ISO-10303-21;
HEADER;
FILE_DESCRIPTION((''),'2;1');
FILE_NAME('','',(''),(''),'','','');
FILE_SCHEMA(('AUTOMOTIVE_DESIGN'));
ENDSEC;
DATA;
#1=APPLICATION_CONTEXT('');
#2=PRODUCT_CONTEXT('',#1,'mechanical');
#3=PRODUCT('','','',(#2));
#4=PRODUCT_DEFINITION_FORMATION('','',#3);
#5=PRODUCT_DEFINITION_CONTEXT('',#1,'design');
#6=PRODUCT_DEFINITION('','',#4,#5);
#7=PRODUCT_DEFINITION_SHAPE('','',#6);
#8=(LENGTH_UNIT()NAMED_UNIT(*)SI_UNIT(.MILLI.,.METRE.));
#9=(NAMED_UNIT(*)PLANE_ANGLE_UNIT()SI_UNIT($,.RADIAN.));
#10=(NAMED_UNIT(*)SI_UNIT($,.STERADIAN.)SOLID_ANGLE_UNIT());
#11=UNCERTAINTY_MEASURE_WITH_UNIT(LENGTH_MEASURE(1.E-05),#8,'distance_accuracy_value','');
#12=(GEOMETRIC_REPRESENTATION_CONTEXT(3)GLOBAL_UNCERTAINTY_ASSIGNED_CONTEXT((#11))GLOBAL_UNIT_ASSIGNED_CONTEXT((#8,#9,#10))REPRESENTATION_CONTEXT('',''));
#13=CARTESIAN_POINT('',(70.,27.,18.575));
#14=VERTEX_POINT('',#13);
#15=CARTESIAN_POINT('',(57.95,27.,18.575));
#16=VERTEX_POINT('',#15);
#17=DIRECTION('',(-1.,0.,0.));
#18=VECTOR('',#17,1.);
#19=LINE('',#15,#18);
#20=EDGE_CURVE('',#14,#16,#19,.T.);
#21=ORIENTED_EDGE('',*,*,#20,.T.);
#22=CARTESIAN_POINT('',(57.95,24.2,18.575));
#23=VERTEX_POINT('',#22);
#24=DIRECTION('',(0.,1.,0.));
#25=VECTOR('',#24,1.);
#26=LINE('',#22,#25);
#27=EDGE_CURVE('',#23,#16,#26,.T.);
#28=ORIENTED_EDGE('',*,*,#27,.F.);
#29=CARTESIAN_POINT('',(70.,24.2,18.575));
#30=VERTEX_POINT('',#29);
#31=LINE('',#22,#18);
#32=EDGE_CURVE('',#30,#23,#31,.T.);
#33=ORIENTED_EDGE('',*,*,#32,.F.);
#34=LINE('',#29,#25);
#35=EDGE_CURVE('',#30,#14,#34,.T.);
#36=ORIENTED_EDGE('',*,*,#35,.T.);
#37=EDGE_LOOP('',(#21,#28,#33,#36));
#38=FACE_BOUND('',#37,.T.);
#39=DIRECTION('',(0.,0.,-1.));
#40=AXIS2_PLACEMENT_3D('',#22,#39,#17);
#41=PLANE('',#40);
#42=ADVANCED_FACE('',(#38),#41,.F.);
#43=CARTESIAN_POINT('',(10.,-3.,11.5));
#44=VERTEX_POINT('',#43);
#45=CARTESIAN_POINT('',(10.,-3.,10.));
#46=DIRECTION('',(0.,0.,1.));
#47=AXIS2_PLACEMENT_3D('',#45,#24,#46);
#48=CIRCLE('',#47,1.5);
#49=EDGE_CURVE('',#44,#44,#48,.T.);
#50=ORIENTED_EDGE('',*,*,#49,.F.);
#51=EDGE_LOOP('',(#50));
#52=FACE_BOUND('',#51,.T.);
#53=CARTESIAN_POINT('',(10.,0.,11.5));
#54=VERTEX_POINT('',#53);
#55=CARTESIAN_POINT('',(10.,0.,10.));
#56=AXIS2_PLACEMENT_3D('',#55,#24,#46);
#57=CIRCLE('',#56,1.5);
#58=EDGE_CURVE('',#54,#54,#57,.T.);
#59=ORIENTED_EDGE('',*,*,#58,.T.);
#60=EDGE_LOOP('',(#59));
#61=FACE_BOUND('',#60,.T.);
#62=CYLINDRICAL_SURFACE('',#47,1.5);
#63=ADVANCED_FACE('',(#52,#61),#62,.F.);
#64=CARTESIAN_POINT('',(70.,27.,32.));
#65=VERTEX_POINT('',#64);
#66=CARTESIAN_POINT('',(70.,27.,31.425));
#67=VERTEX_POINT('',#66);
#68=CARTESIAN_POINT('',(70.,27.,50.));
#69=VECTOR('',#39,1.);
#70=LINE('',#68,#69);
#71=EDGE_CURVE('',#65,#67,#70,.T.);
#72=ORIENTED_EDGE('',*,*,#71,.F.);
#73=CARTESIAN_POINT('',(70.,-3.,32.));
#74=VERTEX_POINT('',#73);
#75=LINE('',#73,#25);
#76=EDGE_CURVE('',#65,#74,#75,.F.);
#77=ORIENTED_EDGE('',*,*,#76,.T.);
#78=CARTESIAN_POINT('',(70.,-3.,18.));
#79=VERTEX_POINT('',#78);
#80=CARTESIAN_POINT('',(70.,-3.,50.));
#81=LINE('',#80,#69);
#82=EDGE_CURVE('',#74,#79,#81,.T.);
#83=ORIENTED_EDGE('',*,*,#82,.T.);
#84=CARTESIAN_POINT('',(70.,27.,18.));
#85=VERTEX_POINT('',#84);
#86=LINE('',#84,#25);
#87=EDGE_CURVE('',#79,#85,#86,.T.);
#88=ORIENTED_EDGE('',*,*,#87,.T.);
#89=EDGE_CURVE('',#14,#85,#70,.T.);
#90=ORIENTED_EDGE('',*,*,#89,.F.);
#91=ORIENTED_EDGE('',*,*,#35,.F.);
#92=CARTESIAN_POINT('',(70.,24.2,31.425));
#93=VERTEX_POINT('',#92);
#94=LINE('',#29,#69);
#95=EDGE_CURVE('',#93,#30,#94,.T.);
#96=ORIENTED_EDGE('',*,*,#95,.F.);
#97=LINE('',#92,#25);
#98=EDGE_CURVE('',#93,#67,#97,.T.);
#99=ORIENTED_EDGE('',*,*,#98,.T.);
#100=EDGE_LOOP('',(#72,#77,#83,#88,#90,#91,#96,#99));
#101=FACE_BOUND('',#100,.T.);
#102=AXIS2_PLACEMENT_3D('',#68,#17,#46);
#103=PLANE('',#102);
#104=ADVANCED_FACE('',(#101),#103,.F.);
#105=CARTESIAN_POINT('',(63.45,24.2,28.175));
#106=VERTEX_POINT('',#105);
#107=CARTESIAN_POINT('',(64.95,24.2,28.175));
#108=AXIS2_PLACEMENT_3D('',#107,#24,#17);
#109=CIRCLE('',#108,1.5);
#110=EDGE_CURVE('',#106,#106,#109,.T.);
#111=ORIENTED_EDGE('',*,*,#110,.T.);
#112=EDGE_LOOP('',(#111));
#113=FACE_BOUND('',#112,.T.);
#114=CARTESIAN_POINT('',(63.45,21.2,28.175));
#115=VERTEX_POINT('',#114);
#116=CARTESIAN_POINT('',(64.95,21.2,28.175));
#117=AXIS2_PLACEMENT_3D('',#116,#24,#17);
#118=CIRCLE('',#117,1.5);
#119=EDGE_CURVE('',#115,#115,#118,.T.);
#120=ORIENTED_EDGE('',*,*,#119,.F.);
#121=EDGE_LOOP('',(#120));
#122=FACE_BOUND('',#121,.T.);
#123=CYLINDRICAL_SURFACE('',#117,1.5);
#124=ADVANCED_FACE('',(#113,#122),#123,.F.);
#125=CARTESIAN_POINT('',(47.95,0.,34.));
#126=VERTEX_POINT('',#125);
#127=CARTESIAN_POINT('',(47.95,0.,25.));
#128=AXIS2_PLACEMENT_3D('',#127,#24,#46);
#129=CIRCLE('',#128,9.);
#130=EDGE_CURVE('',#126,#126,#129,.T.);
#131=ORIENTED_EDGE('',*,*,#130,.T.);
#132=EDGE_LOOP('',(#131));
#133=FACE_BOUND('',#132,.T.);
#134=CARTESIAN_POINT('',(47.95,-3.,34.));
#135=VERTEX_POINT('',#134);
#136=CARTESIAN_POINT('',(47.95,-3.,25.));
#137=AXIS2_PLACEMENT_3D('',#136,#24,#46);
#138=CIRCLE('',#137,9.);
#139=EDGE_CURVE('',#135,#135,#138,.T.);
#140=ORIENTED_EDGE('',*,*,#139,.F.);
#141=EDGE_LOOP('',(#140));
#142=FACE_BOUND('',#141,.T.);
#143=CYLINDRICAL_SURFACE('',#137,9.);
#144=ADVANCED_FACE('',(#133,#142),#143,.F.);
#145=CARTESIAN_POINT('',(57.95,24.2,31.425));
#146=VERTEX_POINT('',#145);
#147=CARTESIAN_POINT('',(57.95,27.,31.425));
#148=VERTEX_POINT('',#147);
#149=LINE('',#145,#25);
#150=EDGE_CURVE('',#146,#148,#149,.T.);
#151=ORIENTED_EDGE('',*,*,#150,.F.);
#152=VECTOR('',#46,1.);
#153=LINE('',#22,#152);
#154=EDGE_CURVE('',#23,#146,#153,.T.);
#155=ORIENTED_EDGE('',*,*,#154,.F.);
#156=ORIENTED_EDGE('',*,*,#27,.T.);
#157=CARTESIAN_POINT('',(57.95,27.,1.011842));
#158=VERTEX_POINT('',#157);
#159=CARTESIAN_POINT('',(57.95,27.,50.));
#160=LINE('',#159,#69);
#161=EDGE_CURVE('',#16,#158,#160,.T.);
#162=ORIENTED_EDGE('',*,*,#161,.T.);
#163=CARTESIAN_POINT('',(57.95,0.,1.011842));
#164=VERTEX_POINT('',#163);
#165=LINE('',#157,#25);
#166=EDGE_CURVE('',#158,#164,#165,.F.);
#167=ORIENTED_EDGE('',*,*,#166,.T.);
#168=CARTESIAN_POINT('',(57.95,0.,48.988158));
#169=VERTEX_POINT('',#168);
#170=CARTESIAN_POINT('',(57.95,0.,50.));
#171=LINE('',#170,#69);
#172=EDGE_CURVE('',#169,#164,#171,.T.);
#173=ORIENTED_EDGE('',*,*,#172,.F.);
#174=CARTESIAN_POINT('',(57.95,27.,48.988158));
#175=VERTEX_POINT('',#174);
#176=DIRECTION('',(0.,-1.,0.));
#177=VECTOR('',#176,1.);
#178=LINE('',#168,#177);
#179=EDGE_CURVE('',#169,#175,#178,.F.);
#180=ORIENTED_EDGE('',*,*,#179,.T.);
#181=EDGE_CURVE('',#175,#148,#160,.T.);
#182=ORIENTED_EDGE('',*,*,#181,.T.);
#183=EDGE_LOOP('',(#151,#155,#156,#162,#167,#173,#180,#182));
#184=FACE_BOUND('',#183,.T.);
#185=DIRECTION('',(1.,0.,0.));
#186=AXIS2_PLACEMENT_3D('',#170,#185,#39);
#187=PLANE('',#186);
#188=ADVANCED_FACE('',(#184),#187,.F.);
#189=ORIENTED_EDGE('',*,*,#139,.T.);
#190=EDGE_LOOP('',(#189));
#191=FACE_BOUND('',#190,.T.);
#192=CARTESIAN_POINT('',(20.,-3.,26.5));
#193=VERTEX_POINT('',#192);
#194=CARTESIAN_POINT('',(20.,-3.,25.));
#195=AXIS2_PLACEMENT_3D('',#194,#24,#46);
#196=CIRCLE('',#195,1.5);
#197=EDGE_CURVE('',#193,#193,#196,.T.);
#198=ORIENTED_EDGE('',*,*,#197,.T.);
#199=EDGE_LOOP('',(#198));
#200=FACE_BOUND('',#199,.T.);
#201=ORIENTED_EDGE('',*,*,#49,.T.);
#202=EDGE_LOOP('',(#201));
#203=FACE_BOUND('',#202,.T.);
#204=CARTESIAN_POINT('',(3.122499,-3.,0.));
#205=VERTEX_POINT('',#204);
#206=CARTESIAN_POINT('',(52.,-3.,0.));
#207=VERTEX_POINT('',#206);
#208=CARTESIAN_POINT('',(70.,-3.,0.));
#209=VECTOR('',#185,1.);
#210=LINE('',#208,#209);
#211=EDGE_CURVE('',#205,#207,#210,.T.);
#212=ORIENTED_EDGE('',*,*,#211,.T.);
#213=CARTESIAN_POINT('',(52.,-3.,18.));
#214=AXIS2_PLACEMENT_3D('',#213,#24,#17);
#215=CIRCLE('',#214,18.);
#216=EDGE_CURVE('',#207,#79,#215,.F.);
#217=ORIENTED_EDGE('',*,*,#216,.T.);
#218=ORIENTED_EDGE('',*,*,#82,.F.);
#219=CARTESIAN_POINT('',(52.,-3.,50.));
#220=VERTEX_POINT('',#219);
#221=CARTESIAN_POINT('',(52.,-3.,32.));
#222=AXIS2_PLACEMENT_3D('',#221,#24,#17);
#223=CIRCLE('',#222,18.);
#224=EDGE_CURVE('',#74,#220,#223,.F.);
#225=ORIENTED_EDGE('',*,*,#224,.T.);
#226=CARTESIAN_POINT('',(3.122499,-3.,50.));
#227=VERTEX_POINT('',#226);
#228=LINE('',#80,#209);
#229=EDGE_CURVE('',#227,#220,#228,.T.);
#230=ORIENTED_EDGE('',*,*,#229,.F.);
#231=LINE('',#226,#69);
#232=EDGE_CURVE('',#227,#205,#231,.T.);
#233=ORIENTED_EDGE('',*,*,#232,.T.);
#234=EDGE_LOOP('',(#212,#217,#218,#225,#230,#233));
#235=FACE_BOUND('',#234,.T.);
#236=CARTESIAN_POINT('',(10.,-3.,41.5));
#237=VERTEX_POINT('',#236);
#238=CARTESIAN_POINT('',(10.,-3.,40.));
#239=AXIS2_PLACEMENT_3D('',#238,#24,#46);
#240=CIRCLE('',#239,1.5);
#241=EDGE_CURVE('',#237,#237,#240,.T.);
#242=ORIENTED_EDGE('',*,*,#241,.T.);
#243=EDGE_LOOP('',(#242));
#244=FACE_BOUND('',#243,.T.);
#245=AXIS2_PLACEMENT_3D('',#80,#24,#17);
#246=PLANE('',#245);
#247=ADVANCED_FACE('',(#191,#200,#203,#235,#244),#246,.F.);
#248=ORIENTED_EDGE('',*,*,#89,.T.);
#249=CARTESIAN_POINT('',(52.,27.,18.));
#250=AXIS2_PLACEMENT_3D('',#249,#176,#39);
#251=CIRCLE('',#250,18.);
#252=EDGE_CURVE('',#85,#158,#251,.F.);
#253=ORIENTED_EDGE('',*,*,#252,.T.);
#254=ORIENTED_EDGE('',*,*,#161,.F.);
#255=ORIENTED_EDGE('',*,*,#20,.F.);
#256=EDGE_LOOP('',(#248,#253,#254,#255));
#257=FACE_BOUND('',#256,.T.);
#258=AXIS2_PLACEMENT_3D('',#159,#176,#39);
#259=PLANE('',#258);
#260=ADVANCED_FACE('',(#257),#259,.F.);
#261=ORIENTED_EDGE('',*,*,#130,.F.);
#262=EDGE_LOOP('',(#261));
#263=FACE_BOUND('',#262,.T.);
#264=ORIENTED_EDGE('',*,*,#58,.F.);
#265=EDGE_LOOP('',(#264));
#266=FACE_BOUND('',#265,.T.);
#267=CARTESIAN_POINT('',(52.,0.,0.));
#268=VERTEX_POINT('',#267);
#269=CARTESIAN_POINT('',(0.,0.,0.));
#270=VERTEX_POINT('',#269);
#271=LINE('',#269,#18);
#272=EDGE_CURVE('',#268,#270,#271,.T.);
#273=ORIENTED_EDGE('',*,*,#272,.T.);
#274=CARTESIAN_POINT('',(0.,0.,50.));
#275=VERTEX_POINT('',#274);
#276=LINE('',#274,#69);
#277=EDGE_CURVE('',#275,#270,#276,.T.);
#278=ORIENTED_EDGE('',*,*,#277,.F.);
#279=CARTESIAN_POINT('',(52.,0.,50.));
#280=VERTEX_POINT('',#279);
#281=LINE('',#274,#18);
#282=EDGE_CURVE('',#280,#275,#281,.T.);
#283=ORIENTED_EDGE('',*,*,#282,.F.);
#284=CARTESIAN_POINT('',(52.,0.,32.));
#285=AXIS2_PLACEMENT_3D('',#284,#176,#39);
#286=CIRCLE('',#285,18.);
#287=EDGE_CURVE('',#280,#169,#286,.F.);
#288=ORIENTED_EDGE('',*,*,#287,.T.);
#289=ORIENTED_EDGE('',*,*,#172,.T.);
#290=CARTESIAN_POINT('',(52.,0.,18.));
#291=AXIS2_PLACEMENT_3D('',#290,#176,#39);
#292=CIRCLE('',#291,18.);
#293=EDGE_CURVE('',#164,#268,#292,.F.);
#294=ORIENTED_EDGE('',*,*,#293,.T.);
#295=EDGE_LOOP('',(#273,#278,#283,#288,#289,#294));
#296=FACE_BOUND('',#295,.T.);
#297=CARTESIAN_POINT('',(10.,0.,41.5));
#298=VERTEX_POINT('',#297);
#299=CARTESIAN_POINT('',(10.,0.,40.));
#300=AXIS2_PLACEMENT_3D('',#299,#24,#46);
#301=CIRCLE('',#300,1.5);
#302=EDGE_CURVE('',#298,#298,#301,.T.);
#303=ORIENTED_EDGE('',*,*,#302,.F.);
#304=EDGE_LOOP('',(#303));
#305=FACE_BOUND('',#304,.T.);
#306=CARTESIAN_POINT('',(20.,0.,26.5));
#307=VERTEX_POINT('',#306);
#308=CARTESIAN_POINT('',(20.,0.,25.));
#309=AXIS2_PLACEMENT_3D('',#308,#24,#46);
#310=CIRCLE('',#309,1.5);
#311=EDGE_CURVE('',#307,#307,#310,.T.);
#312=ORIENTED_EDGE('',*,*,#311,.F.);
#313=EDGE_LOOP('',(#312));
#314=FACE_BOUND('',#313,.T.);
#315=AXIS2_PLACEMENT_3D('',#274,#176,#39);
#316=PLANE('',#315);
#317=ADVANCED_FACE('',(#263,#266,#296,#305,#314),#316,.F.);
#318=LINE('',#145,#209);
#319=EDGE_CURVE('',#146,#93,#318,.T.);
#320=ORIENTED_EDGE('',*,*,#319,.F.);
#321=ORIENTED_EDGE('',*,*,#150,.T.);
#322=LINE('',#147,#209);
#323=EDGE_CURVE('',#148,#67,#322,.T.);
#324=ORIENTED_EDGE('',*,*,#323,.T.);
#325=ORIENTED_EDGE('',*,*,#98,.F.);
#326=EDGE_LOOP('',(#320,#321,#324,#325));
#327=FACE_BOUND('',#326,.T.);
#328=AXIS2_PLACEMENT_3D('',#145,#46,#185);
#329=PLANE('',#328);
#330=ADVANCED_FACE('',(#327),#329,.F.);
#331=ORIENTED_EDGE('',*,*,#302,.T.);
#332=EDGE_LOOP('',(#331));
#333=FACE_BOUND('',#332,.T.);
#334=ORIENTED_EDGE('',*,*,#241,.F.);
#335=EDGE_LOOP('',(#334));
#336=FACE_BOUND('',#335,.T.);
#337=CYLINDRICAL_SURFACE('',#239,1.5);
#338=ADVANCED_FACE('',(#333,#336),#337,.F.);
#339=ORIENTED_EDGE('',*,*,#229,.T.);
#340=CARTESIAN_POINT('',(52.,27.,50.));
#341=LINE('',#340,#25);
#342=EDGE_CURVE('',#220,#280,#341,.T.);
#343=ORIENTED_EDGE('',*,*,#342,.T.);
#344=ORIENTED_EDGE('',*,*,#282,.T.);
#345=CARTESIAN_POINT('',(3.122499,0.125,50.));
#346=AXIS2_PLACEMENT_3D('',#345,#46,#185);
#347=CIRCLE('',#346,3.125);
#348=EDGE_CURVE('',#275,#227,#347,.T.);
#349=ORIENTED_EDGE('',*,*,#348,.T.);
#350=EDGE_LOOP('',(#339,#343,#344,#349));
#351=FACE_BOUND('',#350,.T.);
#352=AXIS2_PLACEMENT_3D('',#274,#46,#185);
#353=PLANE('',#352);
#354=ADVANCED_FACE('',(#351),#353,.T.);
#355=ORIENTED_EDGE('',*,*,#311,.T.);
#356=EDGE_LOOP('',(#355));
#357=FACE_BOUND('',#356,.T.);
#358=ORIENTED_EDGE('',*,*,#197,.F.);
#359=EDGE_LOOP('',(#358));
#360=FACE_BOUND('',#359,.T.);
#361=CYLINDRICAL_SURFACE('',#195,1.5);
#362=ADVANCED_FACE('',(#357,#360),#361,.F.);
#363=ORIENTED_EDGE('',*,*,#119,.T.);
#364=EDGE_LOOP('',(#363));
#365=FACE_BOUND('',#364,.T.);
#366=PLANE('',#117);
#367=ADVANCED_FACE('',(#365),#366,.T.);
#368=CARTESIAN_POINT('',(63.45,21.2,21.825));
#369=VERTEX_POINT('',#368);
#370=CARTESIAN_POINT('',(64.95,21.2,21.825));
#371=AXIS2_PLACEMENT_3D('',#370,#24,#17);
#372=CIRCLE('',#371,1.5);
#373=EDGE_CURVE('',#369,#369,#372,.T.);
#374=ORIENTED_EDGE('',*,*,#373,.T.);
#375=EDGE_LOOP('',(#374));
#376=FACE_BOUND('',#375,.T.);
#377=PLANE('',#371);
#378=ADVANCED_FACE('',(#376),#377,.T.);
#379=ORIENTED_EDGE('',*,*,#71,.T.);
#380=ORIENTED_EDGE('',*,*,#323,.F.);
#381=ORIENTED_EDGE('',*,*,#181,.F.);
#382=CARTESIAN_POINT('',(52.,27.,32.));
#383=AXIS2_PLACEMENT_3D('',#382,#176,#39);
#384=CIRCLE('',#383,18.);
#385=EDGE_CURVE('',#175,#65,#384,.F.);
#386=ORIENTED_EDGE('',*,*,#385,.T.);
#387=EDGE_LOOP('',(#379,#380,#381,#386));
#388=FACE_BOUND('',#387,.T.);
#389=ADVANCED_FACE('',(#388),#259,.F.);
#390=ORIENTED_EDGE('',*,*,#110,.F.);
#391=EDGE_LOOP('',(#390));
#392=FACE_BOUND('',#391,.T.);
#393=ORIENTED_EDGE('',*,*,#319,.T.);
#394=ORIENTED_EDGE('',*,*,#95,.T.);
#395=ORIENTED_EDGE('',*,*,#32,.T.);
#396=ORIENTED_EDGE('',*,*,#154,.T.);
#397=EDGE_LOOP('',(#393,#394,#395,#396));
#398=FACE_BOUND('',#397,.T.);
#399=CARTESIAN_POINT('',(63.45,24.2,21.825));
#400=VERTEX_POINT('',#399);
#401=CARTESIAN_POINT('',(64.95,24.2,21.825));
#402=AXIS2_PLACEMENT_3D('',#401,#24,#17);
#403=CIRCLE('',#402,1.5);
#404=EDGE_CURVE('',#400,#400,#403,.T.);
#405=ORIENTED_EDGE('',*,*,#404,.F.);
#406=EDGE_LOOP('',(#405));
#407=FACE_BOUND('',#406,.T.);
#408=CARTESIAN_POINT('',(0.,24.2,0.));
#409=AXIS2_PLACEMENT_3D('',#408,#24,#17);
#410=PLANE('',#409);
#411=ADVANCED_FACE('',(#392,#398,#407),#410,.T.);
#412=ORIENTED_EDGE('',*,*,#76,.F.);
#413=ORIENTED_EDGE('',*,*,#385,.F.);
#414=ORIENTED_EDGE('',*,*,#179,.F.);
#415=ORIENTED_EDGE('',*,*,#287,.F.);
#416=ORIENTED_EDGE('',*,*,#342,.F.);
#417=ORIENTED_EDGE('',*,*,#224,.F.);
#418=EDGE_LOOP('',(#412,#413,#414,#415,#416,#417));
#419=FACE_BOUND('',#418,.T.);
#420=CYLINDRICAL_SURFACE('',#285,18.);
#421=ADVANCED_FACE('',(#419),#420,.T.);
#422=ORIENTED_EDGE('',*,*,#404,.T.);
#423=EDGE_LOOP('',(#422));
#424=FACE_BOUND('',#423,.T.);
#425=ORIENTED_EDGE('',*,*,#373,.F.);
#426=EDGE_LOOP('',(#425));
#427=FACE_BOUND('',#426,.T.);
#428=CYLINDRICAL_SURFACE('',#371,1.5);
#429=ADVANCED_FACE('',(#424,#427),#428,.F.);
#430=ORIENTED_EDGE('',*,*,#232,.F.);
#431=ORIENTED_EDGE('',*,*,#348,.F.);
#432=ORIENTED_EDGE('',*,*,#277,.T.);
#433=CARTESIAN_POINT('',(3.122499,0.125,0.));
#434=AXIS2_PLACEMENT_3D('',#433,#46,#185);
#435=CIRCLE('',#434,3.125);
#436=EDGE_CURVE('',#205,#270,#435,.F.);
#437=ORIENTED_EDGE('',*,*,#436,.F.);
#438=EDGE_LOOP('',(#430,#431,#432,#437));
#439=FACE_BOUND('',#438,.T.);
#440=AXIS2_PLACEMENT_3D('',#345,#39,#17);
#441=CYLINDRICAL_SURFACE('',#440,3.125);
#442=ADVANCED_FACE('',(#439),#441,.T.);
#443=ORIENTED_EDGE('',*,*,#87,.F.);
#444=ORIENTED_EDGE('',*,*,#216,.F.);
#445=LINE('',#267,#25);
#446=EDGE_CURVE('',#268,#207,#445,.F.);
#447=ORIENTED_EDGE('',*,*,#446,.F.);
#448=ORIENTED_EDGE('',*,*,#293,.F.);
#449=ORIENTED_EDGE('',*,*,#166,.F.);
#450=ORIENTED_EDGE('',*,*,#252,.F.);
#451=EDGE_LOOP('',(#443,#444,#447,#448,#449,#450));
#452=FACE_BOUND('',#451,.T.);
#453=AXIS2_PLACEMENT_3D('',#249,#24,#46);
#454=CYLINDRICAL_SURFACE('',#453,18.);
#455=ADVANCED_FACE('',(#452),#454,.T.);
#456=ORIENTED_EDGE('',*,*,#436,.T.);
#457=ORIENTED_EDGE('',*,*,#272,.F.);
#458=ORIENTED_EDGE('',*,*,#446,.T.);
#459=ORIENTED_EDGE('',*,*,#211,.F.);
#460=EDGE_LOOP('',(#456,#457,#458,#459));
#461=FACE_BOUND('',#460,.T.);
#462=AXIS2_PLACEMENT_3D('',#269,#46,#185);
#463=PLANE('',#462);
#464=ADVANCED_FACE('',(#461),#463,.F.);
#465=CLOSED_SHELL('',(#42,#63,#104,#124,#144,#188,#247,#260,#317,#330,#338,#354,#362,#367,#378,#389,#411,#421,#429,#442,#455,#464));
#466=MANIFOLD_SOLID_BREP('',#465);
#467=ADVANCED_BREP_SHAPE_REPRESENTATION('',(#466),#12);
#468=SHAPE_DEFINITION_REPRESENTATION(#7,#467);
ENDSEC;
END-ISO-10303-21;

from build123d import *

# Parameters (mm, degrees)
BOSS_EXTRUDE1_DEPTH                        = 50
MOUNTHOLESSKETCH2_R                        = 1.5
MOUNTHOLESSKETCH2_R_2                      = 9
MOUNTHOLESCUT_EXTRUDE1_DEPTH               = 91.160967164
MICROSWITCHCUTSKETCH3_W                    = 12.05
MICROSWITCHCUTSKETCH3_H                    = 12.85
MICROSWITCHCUT_EXTRUDE2_DEPTH              = 2.8
MICROSWITCHMOUNTINGHOLESSKETCH4_R          = 1.5
MICROSWITCHMOUNTINGHOLESCUT_EXTRUDE3_DEPTH = 3
RAILEDGEFILLET1_R                          = 3.125
FRONTEDGEFILLET1_R                         = 18


with BuildPart() as part:
    # ProfileSketch1 → Boss-Extrude1 (new body)
    with BuildSketch(Plane.XY):
        Polygon((70, 0), (70, -3), (0, -3), (0, 0), (57.95, 0), (57.95, 27), (70, 27), align=None)
    extrude(amount=BOSS_EXTRUDE1_DEPTH)

    # MountHolesSketch2 → MountHolesCut-Extrude1 (cut, through all)
    with BuildSketch(Plane(origin=(0, 0, 0), x_dir=(1, 0, 0), z_dir=(0, 1, 0))):
        with Locations(Location((10, -10, 0), (0, 0, 270))):
            Circle(MOUNTHOLESSKETCH2_R)
        with Locations(Location((10, -40, 0), (0, 0, 270))):
            Circle(MOUNTHOLESSKETCH2_R)
        with Locations(Location((47.95, -25, 0), (0, 0, 270))):
            Circle(MOUNTHOLESSKETCH2_R_2)
        with Locations(Location((20, -25, 0), (0, 0, 270))):
            Circle(MOUNTHOLESSKETCH2_R)
    extrude(amount=-MOUNTHOLESCUT_EXTRUDE1_DEPTH, mode=Mode.SUBTRACT)

    # MicroSwitchCutSketch3 → MicroSwitchCut-Extrude2 (cut)
    with BuildSketch(Plane(origin=(0, 27, 0), x_dir=(1, 0, 0), z_dir=(0, 1, 0))):
        with Locations((63.975, -25)):
            Rectangle(MICROSWITCHCUTSKETCH3_W, MICROSWITCHCUTSKETCH3_H)
    extrude(amount=-MICROSWITCHCUT_EXTRUDE2_DEPTH, mode=Mode.SUBTRACT)

    # MicroSwitchMountingHolesSketch4 → MicroSwitchMountingHolesCut-Extrude3 (cut)
    with BuildSketch(Plane(origin=(0, 24.2, 0), x_dir=(1, 0, 0), z_dir=(0, 1, 0))):
        with Locations(Location((64.95, -28.175, 0), (0, 0, 180))):
            Circle(MICROSWITCHMOUNTINGHOLESSKETCH4_R)
        with Locations(Location((64.95, -21.825, 0), (0, 0, 180))):
            Circle(MICROSWITCHMOUNTINGHOLESSKETCH4_R)
    extrude(amount=-MICROSWITCHMOUNTINGHOLESCUT_EXTRUDE3_DEPTH, mode=Mode.SUBTRACT)

    # RailEdgeFillet1
    # the kernel refuses this fillet: 3.125 mm, written as the material it takes off along each edge
    with BuildSketch(Plane(origin=(0, -3, -7.806247498), x_dir=(1, 0, 0), z_dir=(0, 0, 1))) as railedgefillet1_piece_1:
        with BuildLine():
            CenterArc((3.122498999, 3.125), RAILEDGEFILLET1_R, 182.292442776, 87.707557224)
            Line((0, 3), (-0.06244998, 2.9975))
            ThreePointArc((-0.06244998, 2.9975), (-0.0625, 1.5), (-0.0625, 0))
            Line((-0.0625, 0), (0, -0.0625))
            Line((0, -0.0625), (3.122498999, -0.0625))
            Line((3.122498999, -0.0625), (3.122498999, 0))
        make_face()
    extrude(amount=65.612494996, mode=Mode.SUBTRACT)

    # FrontEdgeFillet1
    frontedgefillet1_edges = [part.edges().sort_by_distance(p)[0] for p in [
        (70, 12, 0),
        (70, 12, 50),
    ]]
    fillet(frontedgefillet1_edges, radius=FRONTEDGEFILLET1_R)


solid = part.part
